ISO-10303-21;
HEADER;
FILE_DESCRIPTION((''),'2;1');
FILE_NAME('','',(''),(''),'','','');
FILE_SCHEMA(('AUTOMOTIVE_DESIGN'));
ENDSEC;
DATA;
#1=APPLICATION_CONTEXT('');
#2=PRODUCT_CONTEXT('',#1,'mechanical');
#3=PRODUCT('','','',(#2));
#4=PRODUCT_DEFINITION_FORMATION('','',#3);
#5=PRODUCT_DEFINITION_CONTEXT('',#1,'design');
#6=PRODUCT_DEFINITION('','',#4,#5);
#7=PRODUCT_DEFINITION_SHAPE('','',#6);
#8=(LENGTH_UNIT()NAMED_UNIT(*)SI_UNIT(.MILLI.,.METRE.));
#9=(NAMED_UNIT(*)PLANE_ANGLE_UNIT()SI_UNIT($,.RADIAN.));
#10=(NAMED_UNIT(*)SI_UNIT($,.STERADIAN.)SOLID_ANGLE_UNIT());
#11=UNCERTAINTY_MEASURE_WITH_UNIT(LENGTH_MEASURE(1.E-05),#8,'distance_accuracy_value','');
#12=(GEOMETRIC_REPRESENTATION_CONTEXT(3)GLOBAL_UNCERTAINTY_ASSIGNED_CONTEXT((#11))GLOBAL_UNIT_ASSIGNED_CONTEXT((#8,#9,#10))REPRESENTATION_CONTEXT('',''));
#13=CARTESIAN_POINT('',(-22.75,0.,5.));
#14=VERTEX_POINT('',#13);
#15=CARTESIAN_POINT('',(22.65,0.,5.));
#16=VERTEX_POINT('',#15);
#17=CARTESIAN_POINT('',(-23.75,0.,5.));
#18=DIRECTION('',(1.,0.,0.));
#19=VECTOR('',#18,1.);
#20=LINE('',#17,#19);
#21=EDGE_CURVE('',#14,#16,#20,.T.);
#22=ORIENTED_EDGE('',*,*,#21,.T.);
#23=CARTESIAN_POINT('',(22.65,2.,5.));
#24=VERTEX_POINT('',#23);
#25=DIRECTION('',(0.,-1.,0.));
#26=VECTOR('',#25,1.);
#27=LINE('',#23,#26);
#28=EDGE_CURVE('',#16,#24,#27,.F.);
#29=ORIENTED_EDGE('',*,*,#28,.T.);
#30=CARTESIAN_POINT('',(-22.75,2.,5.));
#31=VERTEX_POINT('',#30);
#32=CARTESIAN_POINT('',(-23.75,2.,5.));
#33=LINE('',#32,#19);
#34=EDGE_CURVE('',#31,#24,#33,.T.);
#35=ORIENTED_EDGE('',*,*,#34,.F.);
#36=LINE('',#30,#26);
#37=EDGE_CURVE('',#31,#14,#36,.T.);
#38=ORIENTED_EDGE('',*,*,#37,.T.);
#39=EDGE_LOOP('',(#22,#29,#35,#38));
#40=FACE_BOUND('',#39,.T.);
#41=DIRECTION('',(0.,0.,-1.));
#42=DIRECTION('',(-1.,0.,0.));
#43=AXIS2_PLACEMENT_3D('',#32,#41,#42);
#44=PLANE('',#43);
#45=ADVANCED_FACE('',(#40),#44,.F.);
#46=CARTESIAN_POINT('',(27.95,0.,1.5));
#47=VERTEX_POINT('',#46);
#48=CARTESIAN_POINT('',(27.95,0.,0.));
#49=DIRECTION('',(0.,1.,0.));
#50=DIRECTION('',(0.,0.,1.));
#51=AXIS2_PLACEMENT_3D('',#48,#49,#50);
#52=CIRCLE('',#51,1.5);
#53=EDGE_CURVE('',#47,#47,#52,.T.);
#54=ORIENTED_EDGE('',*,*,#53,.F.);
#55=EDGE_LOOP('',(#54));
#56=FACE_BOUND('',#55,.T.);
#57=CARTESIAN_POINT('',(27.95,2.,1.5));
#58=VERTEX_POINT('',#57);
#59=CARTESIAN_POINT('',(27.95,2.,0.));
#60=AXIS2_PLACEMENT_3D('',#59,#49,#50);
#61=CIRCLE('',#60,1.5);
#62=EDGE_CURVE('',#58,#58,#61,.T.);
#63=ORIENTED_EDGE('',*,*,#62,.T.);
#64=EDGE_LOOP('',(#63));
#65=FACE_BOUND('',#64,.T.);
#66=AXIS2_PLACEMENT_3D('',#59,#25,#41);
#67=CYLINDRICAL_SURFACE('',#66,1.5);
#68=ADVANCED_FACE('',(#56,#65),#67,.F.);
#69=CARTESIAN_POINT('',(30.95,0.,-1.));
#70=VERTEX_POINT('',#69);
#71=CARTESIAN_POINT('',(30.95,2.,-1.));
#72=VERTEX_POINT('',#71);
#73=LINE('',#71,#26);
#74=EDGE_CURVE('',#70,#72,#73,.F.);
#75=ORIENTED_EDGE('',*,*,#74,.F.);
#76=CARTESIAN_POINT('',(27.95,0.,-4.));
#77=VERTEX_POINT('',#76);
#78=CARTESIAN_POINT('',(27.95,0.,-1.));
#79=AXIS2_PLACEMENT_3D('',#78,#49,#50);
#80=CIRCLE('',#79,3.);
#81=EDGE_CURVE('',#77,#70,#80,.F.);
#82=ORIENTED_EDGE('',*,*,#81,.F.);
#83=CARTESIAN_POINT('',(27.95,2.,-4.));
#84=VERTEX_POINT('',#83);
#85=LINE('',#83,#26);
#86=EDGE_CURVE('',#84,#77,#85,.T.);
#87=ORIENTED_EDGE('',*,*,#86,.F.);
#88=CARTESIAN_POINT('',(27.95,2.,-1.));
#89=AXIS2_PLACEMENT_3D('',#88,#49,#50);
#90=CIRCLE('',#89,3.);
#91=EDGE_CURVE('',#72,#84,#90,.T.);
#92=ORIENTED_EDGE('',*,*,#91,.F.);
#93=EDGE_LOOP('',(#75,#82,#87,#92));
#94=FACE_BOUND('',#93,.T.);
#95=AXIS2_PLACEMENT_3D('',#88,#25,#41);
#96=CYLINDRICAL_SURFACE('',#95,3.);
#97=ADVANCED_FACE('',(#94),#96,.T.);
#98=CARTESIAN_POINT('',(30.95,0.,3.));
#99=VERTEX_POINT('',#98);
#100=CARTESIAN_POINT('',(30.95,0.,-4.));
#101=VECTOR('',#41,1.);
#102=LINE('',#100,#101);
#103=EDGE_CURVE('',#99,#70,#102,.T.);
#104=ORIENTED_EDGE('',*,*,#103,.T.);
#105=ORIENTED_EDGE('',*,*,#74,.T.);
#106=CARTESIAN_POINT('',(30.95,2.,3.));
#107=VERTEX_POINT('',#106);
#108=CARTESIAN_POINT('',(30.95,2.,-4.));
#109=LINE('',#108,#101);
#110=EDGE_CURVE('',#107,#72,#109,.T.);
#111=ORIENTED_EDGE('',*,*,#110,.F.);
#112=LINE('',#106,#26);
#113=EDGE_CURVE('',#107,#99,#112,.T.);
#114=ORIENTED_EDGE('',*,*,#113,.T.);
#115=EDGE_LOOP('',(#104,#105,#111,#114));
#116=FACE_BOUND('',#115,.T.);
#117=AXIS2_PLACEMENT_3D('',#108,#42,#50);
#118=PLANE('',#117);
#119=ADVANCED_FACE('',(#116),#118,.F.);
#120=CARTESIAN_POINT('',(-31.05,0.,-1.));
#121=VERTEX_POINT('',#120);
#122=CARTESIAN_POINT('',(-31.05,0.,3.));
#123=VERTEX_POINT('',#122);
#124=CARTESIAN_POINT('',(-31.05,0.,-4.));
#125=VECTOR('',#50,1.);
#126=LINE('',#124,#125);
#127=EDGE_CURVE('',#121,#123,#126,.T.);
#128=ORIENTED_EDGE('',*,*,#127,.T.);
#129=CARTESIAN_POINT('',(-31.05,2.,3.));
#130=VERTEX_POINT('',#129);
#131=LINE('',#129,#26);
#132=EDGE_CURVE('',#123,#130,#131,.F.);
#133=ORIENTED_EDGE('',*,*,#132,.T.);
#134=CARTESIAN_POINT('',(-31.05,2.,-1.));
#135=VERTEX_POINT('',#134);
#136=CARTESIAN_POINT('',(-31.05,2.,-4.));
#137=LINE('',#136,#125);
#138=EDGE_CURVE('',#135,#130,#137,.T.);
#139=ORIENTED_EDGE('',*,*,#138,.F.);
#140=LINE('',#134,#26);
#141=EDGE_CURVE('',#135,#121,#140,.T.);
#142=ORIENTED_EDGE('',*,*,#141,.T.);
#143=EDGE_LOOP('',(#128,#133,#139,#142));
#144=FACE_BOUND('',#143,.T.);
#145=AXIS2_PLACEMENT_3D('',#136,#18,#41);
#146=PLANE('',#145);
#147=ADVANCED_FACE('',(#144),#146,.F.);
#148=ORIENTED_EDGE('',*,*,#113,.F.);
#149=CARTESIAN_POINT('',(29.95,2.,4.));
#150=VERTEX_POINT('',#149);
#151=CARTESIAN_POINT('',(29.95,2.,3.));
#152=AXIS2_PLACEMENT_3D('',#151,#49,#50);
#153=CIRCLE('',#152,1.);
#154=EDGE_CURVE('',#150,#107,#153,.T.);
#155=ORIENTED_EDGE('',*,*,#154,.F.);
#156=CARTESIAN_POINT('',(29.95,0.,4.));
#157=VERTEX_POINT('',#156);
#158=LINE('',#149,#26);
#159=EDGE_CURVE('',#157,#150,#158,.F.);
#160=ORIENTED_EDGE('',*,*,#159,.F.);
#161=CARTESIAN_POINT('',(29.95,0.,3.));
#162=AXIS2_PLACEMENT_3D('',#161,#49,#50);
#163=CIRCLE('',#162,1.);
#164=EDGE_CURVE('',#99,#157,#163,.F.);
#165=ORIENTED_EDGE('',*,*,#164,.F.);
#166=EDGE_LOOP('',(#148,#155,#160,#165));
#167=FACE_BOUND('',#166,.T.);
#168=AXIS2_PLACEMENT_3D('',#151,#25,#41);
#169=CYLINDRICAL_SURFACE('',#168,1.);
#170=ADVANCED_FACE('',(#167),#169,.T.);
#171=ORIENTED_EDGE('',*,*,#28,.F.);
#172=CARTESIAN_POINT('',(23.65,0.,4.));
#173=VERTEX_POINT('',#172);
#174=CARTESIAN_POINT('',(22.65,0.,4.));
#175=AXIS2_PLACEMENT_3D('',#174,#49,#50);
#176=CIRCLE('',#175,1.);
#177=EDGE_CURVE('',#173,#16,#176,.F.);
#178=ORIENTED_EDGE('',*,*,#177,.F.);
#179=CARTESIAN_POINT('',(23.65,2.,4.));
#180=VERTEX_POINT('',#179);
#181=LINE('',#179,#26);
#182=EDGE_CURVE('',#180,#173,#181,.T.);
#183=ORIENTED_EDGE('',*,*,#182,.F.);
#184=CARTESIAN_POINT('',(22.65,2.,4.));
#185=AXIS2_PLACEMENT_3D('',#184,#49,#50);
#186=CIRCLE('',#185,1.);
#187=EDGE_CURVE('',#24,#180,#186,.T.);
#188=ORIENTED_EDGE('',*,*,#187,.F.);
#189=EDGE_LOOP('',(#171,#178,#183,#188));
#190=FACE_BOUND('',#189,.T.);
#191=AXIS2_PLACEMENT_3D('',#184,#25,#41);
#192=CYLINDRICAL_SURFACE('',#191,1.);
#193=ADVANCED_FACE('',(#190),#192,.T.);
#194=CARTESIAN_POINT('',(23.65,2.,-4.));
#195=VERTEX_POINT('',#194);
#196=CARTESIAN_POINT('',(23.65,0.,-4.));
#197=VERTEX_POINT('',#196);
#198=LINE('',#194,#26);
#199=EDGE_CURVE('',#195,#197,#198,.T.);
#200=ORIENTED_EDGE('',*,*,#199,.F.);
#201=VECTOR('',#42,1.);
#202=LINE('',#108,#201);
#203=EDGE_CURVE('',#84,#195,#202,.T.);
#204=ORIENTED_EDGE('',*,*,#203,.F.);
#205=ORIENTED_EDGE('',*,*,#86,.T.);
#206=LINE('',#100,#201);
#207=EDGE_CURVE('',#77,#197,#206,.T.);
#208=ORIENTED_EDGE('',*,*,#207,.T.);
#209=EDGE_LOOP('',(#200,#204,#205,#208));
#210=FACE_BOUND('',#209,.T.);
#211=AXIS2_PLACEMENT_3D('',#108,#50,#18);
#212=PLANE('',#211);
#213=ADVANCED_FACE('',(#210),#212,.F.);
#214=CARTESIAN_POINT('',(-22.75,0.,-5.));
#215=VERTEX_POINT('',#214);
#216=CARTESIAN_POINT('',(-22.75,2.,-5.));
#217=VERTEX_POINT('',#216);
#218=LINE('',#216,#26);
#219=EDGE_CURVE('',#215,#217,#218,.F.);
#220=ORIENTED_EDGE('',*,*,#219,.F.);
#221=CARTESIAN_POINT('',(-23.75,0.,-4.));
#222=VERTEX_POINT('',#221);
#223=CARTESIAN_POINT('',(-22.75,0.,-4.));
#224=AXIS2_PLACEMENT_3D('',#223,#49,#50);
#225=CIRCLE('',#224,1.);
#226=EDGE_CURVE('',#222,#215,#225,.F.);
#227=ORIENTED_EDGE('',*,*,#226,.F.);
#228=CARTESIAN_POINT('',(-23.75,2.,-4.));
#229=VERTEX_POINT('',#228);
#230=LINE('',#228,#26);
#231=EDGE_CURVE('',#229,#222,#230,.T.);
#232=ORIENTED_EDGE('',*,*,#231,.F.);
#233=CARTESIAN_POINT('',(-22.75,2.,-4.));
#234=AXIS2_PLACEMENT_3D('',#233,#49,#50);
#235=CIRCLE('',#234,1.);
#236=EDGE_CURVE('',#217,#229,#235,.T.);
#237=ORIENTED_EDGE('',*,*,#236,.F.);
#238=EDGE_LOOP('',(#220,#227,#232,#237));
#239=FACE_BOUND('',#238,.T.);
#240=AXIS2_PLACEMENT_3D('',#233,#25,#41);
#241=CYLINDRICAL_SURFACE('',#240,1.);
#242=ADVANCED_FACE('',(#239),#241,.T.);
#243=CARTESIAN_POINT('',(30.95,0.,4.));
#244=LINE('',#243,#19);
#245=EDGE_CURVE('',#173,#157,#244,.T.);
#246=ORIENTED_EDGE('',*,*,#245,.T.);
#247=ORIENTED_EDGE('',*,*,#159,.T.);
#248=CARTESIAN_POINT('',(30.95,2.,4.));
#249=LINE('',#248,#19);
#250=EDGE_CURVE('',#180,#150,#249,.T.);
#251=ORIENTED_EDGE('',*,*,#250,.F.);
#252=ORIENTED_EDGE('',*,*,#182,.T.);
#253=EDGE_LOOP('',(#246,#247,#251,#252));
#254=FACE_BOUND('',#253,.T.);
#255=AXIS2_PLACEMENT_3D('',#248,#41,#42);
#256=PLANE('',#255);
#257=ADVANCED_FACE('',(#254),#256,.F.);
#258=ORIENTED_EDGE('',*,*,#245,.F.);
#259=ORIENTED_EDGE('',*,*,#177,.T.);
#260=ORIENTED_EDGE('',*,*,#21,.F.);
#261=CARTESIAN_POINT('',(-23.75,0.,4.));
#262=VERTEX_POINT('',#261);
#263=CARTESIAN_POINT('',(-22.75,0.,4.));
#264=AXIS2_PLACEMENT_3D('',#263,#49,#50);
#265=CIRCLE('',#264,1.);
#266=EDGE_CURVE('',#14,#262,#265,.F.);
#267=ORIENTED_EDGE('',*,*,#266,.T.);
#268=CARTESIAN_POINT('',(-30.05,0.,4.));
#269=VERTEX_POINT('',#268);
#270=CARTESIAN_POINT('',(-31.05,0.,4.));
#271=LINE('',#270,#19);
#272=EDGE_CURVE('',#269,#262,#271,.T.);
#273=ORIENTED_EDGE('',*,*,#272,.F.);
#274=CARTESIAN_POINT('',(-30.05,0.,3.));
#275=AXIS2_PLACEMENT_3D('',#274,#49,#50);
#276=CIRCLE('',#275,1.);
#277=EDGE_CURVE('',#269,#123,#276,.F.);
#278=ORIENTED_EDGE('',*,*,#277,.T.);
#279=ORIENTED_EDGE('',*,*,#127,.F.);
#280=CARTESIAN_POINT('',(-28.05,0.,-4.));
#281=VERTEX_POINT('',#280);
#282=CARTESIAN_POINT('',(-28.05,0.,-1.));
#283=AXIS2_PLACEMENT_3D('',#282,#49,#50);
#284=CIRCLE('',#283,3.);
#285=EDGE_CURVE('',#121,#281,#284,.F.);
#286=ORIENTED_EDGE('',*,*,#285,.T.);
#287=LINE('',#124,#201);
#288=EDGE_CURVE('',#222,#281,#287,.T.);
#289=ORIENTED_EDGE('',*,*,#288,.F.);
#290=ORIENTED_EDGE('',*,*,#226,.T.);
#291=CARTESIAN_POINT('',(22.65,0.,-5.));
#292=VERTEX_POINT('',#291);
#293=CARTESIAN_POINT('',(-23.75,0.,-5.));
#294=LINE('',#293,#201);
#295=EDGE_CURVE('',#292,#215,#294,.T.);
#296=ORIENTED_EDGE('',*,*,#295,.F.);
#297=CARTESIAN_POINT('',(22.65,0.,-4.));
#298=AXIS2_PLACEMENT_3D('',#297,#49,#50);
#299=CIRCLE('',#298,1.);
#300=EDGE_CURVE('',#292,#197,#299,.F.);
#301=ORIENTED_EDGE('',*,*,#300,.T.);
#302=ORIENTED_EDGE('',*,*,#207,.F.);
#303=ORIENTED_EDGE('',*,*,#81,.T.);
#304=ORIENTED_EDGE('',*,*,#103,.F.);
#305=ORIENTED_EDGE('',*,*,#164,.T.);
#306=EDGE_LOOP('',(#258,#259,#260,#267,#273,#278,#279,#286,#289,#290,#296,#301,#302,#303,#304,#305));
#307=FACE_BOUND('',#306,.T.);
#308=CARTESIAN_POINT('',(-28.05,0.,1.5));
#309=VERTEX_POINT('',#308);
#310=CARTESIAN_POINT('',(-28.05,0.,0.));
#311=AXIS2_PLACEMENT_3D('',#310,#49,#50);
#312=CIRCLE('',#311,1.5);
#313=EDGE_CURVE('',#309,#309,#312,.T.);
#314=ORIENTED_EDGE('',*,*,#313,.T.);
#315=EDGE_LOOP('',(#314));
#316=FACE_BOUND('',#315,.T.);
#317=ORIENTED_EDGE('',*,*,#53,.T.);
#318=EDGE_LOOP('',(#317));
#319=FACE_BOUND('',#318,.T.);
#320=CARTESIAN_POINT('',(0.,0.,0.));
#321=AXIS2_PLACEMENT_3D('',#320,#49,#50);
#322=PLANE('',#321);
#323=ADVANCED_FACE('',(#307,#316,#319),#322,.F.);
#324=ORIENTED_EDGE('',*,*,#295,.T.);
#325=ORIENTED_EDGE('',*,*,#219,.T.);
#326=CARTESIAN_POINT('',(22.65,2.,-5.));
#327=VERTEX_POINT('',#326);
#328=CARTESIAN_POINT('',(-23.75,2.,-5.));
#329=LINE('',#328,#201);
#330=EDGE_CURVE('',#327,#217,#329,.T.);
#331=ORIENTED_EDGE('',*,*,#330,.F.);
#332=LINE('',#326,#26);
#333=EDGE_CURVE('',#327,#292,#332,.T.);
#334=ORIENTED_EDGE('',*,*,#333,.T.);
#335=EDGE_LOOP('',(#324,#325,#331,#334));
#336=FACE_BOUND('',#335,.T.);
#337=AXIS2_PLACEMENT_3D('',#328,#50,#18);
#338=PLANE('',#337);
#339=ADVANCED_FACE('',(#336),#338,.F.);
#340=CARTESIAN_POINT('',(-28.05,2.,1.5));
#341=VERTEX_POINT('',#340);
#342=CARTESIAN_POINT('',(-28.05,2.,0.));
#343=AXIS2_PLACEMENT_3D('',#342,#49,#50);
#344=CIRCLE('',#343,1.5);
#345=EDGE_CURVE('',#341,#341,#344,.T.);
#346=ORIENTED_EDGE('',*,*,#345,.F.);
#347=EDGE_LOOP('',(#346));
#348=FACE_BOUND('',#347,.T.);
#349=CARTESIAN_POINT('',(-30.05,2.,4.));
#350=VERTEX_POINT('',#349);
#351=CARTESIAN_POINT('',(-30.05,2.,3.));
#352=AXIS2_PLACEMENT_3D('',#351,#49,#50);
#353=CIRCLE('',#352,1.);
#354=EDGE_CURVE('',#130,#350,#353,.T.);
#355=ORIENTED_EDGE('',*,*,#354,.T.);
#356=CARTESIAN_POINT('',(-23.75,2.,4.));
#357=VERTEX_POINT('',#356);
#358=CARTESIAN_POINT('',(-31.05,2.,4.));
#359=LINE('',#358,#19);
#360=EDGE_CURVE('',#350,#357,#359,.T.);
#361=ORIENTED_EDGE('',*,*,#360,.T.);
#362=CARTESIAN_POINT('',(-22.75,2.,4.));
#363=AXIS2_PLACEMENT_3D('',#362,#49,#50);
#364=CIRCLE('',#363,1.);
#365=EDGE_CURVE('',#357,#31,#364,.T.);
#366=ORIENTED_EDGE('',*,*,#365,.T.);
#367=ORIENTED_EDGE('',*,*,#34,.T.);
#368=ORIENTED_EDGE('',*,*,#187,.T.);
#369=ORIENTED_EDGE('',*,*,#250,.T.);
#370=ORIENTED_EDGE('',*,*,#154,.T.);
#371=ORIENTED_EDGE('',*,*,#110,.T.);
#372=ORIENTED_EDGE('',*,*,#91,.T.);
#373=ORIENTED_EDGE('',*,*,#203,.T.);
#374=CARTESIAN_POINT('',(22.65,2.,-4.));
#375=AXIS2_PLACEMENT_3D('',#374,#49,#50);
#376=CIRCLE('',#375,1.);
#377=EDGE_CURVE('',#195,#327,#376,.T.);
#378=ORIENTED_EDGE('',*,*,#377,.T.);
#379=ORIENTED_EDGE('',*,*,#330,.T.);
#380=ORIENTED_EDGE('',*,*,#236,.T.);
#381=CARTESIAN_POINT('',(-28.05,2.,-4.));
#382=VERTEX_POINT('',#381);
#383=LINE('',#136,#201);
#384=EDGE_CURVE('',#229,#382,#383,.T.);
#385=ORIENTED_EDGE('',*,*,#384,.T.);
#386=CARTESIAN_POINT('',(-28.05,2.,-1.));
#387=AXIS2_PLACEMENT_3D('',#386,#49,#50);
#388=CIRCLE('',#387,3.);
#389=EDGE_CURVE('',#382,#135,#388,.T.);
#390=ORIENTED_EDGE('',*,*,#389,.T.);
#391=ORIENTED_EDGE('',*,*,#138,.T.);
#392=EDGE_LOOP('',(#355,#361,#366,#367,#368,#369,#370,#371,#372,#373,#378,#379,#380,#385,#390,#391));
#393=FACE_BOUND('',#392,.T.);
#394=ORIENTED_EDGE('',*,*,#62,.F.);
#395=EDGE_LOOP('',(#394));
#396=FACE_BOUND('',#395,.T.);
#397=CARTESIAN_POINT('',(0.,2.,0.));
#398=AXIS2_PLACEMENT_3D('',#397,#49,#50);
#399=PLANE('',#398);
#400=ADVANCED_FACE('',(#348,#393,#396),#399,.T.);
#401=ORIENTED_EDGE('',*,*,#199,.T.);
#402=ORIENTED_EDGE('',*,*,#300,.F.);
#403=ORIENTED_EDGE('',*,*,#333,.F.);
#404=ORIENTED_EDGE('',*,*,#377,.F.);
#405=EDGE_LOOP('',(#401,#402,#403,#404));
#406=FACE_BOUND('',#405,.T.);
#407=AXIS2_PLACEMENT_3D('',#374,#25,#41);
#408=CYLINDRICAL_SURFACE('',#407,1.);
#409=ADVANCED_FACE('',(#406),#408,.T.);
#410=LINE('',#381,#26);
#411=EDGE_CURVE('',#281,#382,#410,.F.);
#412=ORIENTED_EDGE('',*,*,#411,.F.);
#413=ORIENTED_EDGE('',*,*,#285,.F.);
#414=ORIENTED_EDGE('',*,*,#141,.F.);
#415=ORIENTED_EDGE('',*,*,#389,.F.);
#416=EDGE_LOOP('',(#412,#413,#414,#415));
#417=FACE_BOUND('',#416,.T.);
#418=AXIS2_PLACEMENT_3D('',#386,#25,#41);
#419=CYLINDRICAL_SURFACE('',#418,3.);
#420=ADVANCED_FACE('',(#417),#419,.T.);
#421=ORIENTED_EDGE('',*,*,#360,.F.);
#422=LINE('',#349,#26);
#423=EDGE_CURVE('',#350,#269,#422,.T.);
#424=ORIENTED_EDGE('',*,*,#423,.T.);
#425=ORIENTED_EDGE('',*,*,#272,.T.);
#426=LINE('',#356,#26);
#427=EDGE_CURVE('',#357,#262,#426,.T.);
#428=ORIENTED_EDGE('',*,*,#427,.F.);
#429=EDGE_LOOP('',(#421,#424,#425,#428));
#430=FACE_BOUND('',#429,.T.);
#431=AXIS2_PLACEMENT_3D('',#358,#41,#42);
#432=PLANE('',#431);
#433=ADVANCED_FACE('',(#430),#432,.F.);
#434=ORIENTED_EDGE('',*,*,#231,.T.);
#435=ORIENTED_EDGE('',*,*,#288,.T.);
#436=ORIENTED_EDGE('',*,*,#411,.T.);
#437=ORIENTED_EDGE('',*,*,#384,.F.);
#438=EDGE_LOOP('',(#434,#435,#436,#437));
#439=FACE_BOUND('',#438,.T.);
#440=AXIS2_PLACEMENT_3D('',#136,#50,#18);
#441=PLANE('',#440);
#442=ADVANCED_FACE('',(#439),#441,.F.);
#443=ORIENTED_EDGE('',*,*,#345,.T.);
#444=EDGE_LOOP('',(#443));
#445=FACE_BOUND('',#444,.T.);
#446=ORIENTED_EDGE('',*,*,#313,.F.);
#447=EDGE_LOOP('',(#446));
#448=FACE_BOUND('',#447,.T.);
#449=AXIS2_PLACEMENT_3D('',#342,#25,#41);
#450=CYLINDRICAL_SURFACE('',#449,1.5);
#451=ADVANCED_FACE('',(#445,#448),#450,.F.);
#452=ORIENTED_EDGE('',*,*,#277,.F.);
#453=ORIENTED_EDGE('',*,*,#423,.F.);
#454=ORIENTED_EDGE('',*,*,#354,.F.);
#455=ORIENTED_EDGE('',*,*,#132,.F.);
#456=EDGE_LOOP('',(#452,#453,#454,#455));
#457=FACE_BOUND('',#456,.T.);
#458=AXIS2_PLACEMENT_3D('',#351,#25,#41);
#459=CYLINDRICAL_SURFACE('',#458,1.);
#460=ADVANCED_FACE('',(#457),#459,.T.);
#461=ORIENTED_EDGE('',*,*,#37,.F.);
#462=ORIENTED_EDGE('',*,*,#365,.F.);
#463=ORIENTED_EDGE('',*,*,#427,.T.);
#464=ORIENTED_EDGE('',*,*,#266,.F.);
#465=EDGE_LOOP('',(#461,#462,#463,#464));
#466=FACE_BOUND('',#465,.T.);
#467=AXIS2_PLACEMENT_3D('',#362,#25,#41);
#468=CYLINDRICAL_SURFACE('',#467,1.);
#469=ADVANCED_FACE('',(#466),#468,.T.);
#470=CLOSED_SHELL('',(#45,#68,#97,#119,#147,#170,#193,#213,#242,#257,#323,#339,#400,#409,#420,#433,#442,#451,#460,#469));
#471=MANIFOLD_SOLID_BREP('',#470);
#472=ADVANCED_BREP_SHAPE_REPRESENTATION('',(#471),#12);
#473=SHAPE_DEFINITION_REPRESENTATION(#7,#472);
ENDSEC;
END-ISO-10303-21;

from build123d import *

# Parameters (mm, degrees)
SKETCH1_R           = 1.5
BOSS_EXTRUDE1_DEPTH = 2
FILLET1_R           = 3
FILLET2_R           = 1


with BuildPart() as part:
    # Sketch1 → Boss-Extrude1 (new body)
    with BuildSketch(Plane(origin=(0, 0, 0), x_dir=(1, 0, 0), z_dir=(0, 1, 0))):
        Polygon((-23.75, 5), (23.65, 5), (23.65, 4), (30.95, 4), (30.95, -4), (23.65, -4), (23.65, -5), (-23.75, -5), (-23.75, -4), (-31.05, -4), (-31.05, 4), (-23.75, 4), align=None)
        with Locations(Location((-28.05, 0, 0), (0, 0, 270))):
            Circle(SKETCH1_R, mode=Mode.SUBTRACT)
        with Locations(Location((27.95, 0, 0), (0, 0, 270))):
            Circle(SKETCH1_R, mode=Mode.SUBTRACT)
    extrude(amount=BOSS_EXTRUDE1_DEPTH)

    # Fillet1
    fillet1_edges = [part.edges().sort_by_distance(p)[0] for p in [
        (-31.05, 1, -4),
        (30.95, 1, -4),
    ]]
    fillet(fillet1_edges, radius=FILLET1_R)

    # Fillet2
    fillet2_edges = [part.edges().sort_by_distance(p)[0] for p in [
        (-23.75, 1, 5),
        (23.65, 1, 5),
        (23.65, 1, -5),
        (-23.75, 1, -5),
        (-31.05, 1, 4),
        (30.95, 1, 4),
    ]]
    fillet(fillet2_edges, radius=FILLET2_R - 0.0001)  # a hair under: the kernel refuses the full size


solid = part.part
